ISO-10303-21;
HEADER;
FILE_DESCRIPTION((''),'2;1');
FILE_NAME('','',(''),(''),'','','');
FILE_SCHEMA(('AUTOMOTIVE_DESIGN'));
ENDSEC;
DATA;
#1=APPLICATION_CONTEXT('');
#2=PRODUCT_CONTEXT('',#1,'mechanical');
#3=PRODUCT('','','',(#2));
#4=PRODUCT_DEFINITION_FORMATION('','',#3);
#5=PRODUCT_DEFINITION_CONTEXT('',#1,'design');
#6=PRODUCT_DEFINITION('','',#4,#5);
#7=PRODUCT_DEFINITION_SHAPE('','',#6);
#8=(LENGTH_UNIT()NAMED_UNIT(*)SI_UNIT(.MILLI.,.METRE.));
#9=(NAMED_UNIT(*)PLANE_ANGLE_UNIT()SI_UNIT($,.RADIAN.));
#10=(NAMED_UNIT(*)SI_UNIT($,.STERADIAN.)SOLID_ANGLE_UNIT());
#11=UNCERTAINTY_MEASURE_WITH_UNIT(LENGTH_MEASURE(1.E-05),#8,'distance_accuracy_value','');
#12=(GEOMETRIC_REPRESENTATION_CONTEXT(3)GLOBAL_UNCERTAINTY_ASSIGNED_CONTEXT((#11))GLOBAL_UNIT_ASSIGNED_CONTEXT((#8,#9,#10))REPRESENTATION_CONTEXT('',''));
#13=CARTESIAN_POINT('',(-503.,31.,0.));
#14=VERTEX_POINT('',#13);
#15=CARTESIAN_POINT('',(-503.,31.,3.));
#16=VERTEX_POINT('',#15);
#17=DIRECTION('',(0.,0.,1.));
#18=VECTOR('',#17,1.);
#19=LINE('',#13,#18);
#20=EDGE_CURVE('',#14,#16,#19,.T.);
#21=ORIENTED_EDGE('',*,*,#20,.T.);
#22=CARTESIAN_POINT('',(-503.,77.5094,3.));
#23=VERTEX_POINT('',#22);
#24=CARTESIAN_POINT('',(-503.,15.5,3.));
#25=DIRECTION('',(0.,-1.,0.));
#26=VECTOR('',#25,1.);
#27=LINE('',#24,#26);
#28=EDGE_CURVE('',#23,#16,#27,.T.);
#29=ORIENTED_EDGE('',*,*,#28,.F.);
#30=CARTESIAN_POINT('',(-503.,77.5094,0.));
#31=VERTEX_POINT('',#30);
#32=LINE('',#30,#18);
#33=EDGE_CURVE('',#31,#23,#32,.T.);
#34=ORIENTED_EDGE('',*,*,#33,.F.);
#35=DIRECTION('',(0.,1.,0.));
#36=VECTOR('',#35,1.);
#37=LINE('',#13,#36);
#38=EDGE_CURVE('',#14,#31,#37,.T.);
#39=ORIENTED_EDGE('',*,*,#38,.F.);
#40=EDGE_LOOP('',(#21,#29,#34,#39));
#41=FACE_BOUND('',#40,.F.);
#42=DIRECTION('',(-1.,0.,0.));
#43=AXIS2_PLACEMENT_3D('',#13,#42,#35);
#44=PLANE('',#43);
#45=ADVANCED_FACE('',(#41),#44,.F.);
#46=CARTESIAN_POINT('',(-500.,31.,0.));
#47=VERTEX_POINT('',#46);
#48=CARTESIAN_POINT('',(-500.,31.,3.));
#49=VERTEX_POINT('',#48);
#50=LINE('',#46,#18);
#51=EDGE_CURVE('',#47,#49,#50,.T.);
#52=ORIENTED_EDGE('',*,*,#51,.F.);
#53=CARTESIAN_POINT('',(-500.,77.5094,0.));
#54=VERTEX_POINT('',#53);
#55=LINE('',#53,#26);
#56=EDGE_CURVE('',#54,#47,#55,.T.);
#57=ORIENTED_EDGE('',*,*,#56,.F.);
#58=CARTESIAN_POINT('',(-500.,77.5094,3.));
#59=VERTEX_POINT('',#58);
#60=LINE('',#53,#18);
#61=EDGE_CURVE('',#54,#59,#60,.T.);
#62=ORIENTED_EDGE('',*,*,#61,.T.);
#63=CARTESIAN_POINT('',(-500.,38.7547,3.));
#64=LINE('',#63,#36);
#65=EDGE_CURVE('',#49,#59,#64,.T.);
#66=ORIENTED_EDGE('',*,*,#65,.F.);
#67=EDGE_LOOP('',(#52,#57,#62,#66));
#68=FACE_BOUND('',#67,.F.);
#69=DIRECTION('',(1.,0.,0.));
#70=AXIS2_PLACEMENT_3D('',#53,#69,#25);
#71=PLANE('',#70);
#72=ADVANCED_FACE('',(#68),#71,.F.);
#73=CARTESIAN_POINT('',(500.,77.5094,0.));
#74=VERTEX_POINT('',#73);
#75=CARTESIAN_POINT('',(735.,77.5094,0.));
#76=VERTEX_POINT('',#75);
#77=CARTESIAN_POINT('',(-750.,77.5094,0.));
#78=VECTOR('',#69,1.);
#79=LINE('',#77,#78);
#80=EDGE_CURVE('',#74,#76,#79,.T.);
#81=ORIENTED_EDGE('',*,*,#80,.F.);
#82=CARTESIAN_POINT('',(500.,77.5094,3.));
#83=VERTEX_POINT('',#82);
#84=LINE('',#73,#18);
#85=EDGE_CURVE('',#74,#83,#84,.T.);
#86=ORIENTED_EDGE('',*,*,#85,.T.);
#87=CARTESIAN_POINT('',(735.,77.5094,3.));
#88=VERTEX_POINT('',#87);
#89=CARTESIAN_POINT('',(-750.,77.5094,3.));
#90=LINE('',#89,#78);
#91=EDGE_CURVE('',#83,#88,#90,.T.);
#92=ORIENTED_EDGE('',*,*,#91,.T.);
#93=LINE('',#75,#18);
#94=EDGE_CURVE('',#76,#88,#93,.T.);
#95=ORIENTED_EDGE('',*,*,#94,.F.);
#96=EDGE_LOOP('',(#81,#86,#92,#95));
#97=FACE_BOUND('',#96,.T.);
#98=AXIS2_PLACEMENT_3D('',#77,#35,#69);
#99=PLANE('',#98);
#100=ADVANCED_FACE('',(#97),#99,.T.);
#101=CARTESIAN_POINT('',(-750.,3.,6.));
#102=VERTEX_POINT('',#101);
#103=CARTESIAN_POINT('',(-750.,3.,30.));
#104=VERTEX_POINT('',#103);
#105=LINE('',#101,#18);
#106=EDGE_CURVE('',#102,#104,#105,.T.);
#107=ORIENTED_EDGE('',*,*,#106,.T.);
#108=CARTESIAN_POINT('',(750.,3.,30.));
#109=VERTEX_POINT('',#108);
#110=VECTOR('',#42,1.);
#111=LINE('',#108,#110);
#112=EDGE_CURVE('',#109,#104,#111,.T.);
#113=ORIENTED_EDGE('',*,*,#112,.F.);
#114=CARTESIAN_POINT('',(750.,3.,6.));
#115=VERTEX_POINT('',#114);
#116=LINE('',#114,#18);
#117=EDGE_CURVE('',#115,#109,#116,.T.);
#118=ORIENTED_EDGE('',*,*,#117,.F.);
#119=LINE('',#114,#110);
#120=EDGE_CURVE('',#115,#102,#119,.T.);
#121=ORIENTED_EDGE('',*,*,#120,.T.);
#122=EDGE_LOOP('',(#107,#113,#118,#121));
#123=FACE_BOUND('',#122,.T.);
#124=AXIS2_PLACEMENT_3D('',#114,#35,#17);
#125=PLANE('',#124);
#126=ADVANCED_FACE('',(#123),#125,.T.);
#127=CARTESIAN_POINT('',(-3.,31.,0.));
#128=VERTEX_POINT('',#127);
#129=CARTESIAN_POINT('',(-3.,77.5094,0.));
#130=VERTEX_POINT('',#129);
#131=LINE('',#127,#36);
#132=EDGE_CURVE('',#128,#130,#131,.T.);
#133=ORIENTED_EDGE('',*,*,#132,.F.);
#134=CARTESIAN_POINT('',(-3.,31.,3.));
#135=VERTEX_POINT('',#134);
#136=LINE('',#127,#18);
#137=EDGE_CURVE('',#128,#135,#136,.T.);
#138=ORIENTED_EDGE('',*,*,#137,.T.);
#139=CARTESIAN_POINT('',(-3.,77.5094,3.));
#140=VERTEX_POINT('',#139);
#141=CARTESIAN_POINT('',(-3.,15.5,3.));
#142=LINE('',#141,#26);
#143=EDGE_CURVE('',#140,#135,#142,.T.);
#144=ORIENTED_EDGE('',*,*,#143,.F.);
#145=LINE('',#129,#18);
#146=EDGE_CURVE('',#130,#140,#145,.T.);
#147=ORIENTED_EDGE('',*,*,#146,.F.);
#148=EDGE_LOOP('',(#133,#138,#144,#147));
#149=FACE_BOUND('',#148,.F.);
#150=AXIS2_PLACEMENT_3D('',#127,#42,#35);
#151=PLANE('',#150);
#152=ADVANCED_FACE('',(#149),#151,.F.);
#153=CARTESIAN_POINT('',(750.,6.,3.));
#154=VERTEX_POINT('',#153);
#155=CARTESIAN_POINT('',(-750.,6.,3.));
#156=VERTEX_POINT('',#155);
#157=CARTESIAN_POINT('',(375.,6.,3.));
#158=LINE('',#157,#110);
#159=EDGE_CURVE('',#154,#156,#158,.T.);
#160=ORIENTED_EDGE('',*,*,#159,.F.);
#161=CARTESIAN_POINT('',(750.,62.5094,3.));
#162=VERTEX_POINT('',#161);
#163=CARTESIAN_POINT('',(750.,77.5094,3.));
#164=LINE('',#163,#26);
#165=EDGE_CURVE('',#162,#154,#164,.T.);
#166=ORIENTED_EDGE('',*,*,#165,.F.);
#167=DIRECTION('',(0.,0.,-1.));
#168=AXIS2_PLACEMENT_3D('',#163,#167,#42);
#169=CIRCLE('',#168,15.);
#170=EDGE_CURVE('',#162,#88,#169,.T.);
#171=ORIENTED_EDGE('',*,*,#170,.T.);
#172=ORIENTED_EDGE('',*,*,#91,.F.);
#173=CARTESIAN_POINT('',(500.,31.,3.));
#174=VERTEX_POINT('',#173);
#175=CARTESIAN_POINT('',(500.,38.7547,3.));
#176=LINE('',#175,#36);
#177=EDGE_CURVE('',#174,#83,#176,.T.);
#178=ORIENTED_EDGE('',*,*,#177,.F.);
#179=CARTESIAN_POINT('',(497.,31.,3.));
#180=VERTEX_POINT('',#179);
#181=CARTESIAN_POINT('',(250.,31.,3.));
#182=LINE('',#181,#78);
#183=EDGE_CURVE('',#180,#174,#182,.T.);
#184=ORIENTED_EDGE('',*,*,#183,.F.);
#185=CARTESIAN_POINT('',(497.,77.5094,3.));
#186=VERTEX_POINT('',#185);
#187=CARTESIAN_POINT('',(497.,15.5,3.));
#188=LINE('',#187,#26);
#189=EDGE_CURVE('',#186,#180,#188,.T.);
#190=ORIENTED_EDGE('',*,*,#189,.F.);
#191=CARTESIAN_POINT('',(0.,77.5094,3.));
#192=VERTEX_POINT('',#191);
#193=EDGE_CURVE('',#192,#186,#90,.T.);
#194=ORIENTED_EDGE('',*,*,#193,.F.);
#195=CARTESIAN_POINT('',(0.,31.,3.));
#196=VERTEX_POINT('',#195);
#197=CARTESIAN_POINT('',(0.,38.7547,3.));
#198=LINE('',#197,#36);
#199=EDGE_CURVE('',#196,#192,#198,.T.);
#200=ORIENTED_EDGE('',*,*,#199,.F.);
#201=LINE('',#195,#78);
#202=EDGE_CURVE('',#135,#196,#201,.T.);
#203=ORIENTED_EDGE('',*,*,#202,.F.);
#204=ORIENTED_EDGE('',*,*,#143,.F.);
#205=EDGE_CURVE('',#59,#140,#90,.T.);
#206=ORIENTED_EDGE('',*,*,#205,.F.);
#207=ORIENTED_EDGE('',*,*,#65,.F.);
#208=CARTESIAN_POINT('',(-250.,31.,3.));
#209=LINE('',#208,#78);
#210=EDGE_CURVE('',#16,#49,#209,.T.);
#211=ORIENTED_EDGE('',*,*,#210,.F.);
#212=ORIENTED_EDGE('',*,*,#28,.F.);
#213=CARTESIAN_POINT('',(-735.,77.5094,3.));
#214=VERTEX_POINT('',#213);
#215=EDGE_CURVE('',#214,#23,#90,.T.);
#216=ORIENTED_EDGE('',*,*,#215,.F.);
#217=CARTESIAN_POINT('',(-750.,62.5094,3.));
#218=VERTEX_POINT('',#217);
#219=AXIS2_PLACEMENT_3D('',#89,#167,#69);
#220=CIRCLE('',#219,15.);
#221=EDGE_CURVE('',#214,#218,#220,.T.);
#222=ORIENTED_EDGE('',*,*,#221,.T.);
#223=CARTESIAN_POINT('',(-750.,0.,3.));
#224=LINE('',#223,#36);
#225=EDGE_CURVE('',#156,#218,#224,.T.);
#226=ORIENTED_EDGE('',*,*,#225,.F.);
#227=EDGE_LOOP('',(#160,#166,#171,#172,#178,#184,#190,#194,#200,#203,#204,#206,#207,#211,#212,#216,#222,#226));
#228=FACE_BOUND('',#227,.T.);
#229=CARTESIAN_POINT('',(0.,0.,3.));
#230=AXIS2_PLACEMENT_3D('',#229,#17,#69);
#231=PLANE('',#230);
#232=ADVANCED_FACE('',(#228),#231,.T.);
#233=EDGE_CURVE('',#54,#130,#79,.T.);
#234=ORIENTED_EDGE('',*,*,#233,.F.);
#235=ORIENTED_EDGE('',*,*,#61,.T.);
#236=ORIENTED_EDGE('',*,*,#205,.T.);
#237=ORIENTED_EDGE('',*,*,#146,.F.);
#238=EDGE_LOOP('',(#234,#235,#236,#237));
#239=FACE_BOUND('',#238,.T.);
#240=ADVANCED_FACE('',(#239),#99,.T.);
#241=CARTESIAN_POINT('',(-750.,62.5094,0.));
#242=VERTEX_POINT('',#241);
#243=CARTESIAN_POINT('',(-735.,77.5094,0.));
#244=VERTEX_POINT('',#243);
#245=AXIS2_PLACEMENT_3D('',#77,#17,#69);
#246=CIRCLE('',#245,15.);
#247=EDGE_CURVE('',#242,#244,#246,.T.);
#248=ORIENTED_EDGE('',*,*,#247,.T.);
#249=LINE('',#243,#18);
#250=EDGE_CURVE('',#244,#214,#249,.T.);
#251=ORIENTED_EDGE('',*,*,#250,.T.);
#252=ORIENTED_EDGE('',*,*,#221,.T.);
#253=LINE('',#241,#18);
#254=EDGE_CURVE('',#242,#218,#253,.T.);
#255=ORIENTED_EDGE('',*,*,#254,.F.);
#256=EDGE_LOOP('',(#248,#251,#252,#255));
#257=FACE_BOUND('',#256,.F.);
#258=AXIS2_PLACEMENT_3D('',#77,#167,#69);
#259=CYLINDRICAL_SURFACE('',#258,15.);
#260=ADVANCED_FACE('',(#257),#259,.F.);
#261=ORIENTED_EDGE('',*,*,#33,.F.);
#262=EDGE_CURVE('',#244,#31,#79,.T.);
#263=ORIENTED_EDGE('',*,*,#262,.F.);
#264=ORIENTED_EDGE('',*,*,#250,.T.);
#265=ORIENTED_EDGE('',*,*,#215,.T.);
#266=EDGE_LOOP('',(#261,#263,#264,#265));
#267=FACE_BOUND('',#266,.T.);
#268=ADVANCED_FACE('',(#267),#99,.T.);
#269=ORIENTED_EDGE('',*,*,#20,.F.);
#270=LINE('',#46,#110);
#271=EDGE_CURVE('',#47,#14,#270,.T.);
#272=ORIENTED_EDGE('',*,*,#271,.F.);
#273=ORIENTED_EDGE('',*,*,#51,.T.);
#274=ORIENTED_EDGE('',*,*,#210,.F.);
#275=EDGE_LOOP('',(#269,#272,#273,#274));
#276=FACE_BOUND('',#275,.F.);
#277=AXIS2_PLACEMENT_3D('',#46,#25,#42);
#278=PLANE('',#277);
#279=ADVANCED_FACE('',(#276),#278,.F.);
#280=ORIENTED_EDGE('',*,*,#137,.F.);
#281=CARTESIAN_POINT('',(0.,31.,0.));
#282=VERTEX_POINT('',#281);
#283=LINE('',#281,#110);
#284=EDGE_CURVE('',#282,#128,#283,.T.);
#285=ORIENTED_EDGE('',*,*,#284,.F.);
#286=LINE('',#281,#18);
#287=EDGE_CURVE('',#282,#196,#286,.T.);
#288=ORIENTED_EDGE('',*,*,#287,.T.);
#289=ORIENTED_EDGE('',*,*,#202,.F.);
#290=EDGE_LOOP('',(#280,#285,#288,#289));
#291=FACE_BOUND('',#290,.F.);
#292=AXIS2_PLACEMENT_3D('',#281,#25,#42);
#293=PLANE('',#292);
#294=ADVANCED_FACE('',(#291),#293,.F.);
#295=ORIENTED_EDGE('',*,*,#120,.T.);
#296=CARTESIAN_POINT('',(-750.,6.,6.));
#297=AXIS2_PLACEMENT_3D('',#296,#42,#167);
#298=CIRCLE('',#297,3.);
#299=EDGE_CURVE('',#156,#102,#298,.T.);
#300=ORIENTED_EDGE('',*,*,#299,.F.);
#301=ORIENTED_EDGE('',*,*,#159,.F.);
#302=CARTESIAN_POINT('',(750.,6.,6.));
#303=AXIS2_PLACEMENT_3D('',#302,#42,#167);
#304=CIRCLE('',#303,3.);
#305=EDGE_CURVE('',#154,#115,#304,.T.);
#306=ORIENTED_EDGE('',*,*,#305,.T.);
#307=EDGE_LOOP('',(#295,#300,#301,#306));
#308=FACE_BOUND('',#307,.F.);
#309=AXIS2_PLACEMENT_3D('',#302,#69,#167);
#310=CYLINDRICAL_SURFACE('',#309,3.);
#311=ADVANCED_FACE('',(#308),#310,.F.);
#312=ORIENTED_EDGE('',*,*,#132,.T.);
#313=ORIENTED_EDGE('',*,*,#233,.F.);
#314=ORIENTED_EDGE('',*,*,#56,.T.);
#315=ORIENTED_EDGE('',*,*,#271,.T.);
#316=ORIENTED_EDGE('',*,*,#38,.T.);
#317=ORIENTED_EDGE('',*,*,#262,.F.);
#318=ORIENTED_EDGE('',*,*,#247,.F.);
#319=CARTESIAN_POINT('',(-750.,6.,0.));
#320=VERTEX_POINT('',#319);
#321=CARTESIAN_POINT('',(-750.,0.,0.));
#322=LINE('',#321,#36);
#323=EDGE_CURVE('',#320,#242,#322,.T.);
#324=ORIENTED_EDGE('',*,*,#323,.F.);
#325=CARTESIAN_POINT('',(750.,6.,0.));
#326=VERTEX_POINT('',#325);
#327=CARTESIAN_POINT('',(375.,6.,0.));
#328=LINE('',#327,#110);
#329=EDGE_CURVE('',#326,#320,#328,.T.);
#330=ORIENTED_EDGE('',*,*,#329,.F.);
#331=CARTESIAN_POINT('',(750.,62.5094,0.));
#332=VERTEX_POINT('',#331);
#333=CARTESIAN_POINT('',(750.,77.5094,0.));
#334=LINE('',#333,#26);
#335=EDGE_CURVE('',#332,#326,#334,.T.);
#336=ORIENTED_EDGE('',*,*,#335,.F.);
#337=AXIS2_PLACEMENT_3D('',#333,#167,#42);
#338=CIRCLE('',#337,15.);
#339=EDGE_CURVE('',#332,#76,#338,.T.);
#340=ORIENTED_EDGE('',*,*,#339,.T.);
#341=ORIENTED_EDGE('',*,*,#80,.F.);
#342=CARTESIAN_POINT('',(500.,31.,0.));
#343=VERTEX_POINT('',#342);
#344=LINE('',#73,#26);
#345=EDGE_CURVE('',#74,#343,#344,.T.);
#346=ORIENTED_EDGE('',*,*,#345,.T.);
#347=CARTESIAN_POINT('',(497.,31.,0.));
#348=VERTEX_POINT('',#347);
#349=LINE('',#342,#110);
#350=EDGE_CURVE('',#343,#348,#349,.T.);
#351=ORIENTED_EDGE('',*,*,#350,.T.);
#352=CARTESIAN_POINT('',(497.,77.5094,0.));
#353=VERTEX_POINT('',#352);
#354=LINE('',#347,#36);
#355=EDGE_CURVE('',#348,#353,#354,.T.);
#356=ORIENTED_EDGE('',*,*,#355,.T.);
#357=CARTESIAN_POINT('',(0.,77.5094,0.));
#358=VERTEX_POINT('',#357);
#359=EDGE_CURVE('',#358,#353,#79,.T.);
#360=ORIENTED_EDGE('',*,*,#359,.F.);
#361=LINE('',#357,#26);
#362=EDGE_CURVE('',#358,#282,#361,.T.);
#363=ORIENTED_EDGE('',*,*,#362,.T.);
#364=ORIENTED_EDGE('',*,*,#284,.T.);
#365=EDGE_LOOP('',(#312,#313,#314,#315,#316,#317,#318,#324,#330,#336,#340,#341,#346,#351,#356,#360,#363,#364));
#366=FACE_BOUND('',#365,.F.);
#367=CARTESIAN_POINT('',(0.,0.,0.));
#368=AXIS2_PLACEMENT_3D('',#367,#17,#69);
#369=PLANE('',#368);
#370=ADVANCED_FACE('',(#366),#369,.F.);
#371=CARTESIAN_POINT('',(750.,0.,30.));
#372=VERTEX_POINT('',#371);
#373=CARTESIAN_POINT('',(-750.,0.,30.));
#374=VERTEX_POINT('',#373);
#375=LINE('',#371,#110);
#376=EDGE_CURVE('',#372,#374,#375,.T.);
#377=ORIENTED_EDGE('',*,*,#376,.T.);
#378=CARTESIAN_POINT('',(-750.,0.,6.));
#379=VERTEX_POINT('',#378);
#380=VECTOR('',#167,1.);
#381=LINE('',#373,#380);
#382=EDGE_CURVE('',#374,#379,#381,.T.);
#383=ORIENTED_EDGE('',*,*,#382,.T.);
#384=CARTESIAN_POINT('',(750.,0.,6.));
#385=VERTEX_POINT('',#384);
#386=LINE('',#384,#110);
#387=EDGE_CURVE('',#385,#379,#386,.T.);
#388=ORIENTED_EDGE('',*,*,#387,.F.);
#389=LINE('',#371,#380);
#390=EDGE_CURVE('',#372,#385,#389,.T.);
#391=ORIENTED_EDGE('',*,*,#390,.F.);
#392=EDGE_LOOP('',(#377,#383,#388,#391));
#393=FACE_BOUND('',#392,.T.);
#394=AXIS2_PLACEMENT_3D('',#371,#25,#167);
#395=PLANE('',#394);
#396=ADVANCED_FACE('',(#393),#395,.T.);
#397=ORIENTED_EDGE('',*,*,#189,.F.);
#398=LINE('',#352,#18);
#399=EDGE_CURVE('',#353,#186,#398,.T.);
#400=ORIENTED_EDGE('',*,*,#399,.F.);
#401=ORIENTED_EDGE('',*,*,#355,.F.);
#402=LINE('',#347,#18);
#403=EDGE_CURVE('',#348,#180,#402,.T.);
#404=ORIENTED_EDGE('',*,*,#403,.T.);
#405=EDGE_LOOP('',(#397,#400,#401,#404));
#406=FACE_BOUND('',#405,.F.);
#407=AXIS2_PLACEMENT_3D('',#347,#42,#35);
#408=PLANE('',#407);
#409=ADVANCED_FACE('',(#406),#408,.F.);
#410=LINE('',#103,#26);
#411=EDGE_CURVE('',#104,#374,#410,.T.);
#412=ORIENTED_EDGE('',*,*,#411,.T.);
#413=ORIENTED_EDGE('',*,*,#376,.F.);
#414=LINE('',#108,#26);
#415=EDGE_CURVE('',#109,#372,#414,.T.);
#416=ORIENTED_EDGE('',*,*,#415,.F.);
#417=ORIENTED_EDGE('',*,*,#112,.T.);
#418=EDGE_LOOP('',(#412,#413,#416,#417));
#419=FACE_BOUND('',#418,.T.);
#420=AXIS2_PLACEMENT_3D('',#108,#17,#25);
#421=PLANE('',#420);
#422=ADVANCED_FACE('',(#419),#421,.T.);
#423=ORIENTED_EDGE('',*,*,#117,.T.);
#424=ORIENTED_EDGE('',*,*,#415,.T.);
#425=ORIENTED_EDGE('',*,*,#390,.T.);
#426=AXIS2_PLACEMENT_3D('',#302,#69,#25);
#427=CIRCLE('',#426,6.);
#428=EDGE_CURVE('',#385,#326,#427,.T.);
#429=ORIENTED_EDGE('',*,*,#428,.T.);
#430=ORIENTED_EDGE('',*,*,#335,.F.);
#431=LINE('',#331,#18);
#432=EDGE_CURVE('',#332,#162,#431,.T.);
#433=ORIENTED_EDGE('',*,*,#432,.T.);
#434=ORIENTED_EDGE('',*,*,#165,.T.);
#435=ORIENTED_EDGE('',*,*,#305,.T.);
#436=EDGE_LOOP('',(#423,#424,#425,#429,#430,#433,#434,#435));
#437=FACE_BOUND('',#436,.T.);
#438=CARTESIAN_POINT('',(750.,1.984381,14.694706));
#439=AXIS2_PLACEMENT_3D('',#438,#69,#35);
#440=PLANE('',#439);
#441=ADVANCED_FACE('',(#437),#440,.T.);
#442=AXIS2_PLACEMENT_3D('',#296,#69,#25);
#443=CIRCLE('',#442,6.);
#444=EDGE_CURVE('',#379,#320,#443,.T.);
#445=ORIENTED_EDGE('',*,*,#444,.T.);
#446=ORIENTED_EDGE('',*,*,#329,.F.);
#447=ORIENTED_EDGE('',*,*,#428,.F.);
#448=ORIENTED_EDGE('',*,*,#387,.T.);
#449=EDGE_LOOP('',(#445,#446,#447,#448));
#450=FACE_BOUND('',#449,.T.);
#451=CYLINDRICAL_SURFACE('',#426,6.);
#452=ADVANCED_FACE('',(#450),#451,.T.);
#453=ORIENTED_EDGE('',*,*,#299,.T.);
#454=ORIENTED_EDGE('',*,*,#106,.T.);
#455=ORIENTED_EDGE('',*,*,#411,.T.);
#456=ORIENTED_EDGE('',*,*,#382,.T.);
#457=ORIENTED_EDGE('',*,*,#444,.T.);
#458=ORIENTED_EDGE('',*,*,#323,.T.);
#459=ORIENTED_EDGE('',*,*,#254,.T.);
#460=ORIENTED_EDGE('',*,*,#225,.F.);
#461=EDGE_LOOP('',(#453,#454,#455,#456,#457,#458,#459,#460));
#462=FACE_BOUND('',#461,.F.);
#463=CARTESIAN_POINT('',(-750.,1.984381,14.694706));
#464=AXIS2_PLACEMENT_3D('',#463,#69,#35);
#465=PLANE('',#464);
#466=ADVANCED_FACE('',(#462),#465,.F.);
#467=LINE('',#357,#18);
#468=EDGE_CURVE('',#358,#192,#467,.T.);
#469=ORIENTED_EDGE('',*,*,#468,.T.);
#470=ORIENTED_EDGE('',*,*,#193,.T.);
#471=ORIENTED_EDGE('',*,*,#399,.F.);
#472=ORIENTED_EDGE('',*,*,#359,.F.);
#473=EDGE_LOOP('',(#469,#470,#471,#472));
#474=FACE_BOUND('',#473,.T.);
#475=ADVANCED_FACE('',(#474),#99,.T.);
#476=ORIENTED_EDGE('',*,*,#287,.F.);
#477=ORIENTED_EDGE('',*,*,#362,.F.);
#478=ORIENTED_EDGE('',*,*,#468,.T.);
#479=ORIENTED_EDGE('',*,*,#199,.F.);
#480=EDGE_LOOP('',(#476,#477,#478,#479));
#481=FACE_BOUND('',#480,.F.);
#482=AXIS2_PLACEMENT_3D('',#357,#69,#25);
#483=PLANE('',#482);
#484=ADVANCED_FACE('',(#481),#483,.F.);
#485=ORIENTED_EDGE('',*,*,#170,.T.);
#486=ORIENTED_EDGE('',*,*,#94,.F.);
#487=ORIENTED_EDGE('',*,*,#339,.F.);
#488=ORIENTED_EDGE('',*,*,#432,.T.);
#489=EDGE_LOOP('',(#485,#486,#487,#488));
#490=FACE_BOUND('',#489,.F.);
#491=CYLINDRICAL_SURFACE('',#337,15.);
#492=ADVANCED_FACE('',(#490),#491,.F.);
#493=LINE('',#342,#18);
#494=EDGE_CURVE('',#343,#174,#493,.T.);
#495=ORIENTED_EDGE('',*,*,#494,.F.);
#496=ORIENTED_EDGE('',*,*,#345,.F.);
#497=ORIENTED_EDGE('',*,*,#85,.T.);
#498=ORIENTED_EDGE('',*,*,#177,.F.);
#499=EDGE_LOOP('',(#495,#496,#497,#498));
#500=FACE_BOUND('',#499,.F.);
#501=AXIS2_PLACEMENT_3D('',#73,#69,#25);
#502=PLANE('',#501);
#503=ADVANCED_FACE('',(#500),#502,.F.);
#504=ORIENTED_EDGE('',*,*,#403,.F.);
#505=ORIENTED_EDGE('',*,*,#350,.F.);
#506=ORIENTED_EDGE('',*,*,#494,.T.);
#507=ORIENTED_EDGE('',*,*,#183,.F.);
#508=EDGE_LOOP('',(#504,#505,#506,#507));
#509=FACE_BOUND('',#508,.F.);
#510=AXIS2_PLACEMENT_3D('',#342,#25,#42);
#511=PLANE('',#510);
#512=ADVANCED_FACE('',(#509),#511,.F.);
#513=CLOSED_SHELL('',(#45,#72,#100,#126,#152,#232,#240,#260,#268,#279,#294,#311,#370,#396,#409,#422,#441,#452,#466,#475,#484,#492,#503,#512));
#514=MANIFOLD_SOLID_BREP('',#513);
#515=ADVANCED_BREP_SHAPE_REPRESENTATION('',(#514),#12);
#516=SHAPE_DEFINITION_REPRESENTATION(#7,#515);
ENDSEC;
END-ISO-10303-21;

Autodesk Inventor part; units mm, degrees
ref_plane "YZ Plane" through (0, 0, 0) normal (1, 0, 0) x (0, 1, 0)
ref_plane "XZ Plane" through (0, 0, 0) normal (0, 1, 0) x (-1, 0, 0)
ref_plane "XY Plane" through (0, 0, 0) normal (0, 0, 1) x (1, 0, 0)
sketch "Sketch1" plane through (0, 0, 0) normal (0, 0, 1) x (1, 0, 0)
  line L0 (-750, 77.5094) -> (750, 77.5094)
  line L1 (750, 77.5094) -> (750, 0)
  line L2 (750, 0) -> (-750, 0)
  line L3 (-750, 0) -> (-750, 77.5094)
  point P0 (0, 0)
  point P1 (0, 0)
  dimension "d0" = 1500
  dimension "d1" = 77.5094
extrude "Plate1" add sketch "Sketch1" along normal blind 3
sketch "Sketch2" plane through (750, 3, 0) normal (0, -1, 0) x (1, 0, 0)
  line L0 (-1500, 0) -> (0, 0)
  line L1 (0, 0) -> (0, 30)
  line L2 (0, 30) -> (-1500, 30)
  line L3 (-1500, 30) -> (-1500, 0)
edge flange "Flange1" height 30 angle 90 thickness 3 bend radius 3 thickness toward (0, -1, 0) relief tear relief width 3 relief depth 1.5 edges at (0, 0, 3) wall of the first edge with corners at (-750, 3, 0) (750, 3, 0) (750, 3, 30) (-750, 3, 30)
bend "Bend1"
corner "Corner1"
sketch "Sketch5" plane through (0, 0, 0) normal (0, 0, -1) x (-1, 0, 0)
  line L0 (750, 77.5094) -> (-750, 77.5094) projected
  line L1 (500, 77.5094) -> (500, 31)
  line L2 (500, 31) -> (503, 31)
  line L3 (503, 31) -> (503, 77.5094)
  line L4 (750, 0) -> (-750, 0) projected
  point P0 (0, 0)
  dimension "d18" = 3
  dimension "d19" = 247
  dimension "d20" = 31
extrude "Extrusion1" cut sketch "Sketch5" against normal through all
pattern_linear "Rectangular Pattern1" count 3 spacing 500 along (1, 0, 0) of "Extrusion1"
sketch "Sketch6" plane through (0, 0, 0) normal (0, 0, -1) x (-1, 0, 0)
  line L0 (-750, 77.5094) -> (-750, 6) projected
  circle A0 centre (-750, 77.5094) radius 15
  line L1 (-750, 77.5094) -> (-500, 77.5094) projected
  point P0 (0, 0)
  point P1 (-735, 77.5094)
  point P2 (-750, 62.5094)
  dimension "d24" = 30
extrude "Extrusion2" cut sketch "Sketch6" against normal through all contours L1 A0 L0 picked at (-740.1254, 76.3968)
mirror "Mirror1" about plane through (0, 0, 0) normal (1, 0, 0) of "Extrusion2"
equation "\"d1\" = Стрингер_6"
equation "\"d18\" = Thickness"
equation "\"d2\" = Thickness"
equation "\"d3\" = BendReliefWidth"
equation "\"d4\" = BendReliefDepth"
equation "\"d5\" = MinimumRemnant"
equation "\"d6\" = TransitionRadius"
equation "\"d9\" = BendRadius"
equation "\"d10\" = CornerReliefSize"
equation "\"d11\" = GapSize"
equation "\"d12\" = JacobiRadiusSize"
equation "\"BendRadius\" = Thickness"
equation "\"BendReliefWidth\" = Thickness"
equation "\"BendReliefDepth\" = 0.5 * Thickness"
equation "\"CornerReliefSize\" = 4 * Thickness"
equation "\"MinimumRemnant\" = 2 * Thickness"
equation "\"TransitionRadius\" = BendRadius"
equation "\"JacobiRadiusSize\" = BendRadius"
equation "\"GapSize\" = Thickness"
equation "\"Стрингер_6\" = 77.509374"
equation "\"Thickness\" = 3"
properties part number "МОО 056 стрингер борт 6"
